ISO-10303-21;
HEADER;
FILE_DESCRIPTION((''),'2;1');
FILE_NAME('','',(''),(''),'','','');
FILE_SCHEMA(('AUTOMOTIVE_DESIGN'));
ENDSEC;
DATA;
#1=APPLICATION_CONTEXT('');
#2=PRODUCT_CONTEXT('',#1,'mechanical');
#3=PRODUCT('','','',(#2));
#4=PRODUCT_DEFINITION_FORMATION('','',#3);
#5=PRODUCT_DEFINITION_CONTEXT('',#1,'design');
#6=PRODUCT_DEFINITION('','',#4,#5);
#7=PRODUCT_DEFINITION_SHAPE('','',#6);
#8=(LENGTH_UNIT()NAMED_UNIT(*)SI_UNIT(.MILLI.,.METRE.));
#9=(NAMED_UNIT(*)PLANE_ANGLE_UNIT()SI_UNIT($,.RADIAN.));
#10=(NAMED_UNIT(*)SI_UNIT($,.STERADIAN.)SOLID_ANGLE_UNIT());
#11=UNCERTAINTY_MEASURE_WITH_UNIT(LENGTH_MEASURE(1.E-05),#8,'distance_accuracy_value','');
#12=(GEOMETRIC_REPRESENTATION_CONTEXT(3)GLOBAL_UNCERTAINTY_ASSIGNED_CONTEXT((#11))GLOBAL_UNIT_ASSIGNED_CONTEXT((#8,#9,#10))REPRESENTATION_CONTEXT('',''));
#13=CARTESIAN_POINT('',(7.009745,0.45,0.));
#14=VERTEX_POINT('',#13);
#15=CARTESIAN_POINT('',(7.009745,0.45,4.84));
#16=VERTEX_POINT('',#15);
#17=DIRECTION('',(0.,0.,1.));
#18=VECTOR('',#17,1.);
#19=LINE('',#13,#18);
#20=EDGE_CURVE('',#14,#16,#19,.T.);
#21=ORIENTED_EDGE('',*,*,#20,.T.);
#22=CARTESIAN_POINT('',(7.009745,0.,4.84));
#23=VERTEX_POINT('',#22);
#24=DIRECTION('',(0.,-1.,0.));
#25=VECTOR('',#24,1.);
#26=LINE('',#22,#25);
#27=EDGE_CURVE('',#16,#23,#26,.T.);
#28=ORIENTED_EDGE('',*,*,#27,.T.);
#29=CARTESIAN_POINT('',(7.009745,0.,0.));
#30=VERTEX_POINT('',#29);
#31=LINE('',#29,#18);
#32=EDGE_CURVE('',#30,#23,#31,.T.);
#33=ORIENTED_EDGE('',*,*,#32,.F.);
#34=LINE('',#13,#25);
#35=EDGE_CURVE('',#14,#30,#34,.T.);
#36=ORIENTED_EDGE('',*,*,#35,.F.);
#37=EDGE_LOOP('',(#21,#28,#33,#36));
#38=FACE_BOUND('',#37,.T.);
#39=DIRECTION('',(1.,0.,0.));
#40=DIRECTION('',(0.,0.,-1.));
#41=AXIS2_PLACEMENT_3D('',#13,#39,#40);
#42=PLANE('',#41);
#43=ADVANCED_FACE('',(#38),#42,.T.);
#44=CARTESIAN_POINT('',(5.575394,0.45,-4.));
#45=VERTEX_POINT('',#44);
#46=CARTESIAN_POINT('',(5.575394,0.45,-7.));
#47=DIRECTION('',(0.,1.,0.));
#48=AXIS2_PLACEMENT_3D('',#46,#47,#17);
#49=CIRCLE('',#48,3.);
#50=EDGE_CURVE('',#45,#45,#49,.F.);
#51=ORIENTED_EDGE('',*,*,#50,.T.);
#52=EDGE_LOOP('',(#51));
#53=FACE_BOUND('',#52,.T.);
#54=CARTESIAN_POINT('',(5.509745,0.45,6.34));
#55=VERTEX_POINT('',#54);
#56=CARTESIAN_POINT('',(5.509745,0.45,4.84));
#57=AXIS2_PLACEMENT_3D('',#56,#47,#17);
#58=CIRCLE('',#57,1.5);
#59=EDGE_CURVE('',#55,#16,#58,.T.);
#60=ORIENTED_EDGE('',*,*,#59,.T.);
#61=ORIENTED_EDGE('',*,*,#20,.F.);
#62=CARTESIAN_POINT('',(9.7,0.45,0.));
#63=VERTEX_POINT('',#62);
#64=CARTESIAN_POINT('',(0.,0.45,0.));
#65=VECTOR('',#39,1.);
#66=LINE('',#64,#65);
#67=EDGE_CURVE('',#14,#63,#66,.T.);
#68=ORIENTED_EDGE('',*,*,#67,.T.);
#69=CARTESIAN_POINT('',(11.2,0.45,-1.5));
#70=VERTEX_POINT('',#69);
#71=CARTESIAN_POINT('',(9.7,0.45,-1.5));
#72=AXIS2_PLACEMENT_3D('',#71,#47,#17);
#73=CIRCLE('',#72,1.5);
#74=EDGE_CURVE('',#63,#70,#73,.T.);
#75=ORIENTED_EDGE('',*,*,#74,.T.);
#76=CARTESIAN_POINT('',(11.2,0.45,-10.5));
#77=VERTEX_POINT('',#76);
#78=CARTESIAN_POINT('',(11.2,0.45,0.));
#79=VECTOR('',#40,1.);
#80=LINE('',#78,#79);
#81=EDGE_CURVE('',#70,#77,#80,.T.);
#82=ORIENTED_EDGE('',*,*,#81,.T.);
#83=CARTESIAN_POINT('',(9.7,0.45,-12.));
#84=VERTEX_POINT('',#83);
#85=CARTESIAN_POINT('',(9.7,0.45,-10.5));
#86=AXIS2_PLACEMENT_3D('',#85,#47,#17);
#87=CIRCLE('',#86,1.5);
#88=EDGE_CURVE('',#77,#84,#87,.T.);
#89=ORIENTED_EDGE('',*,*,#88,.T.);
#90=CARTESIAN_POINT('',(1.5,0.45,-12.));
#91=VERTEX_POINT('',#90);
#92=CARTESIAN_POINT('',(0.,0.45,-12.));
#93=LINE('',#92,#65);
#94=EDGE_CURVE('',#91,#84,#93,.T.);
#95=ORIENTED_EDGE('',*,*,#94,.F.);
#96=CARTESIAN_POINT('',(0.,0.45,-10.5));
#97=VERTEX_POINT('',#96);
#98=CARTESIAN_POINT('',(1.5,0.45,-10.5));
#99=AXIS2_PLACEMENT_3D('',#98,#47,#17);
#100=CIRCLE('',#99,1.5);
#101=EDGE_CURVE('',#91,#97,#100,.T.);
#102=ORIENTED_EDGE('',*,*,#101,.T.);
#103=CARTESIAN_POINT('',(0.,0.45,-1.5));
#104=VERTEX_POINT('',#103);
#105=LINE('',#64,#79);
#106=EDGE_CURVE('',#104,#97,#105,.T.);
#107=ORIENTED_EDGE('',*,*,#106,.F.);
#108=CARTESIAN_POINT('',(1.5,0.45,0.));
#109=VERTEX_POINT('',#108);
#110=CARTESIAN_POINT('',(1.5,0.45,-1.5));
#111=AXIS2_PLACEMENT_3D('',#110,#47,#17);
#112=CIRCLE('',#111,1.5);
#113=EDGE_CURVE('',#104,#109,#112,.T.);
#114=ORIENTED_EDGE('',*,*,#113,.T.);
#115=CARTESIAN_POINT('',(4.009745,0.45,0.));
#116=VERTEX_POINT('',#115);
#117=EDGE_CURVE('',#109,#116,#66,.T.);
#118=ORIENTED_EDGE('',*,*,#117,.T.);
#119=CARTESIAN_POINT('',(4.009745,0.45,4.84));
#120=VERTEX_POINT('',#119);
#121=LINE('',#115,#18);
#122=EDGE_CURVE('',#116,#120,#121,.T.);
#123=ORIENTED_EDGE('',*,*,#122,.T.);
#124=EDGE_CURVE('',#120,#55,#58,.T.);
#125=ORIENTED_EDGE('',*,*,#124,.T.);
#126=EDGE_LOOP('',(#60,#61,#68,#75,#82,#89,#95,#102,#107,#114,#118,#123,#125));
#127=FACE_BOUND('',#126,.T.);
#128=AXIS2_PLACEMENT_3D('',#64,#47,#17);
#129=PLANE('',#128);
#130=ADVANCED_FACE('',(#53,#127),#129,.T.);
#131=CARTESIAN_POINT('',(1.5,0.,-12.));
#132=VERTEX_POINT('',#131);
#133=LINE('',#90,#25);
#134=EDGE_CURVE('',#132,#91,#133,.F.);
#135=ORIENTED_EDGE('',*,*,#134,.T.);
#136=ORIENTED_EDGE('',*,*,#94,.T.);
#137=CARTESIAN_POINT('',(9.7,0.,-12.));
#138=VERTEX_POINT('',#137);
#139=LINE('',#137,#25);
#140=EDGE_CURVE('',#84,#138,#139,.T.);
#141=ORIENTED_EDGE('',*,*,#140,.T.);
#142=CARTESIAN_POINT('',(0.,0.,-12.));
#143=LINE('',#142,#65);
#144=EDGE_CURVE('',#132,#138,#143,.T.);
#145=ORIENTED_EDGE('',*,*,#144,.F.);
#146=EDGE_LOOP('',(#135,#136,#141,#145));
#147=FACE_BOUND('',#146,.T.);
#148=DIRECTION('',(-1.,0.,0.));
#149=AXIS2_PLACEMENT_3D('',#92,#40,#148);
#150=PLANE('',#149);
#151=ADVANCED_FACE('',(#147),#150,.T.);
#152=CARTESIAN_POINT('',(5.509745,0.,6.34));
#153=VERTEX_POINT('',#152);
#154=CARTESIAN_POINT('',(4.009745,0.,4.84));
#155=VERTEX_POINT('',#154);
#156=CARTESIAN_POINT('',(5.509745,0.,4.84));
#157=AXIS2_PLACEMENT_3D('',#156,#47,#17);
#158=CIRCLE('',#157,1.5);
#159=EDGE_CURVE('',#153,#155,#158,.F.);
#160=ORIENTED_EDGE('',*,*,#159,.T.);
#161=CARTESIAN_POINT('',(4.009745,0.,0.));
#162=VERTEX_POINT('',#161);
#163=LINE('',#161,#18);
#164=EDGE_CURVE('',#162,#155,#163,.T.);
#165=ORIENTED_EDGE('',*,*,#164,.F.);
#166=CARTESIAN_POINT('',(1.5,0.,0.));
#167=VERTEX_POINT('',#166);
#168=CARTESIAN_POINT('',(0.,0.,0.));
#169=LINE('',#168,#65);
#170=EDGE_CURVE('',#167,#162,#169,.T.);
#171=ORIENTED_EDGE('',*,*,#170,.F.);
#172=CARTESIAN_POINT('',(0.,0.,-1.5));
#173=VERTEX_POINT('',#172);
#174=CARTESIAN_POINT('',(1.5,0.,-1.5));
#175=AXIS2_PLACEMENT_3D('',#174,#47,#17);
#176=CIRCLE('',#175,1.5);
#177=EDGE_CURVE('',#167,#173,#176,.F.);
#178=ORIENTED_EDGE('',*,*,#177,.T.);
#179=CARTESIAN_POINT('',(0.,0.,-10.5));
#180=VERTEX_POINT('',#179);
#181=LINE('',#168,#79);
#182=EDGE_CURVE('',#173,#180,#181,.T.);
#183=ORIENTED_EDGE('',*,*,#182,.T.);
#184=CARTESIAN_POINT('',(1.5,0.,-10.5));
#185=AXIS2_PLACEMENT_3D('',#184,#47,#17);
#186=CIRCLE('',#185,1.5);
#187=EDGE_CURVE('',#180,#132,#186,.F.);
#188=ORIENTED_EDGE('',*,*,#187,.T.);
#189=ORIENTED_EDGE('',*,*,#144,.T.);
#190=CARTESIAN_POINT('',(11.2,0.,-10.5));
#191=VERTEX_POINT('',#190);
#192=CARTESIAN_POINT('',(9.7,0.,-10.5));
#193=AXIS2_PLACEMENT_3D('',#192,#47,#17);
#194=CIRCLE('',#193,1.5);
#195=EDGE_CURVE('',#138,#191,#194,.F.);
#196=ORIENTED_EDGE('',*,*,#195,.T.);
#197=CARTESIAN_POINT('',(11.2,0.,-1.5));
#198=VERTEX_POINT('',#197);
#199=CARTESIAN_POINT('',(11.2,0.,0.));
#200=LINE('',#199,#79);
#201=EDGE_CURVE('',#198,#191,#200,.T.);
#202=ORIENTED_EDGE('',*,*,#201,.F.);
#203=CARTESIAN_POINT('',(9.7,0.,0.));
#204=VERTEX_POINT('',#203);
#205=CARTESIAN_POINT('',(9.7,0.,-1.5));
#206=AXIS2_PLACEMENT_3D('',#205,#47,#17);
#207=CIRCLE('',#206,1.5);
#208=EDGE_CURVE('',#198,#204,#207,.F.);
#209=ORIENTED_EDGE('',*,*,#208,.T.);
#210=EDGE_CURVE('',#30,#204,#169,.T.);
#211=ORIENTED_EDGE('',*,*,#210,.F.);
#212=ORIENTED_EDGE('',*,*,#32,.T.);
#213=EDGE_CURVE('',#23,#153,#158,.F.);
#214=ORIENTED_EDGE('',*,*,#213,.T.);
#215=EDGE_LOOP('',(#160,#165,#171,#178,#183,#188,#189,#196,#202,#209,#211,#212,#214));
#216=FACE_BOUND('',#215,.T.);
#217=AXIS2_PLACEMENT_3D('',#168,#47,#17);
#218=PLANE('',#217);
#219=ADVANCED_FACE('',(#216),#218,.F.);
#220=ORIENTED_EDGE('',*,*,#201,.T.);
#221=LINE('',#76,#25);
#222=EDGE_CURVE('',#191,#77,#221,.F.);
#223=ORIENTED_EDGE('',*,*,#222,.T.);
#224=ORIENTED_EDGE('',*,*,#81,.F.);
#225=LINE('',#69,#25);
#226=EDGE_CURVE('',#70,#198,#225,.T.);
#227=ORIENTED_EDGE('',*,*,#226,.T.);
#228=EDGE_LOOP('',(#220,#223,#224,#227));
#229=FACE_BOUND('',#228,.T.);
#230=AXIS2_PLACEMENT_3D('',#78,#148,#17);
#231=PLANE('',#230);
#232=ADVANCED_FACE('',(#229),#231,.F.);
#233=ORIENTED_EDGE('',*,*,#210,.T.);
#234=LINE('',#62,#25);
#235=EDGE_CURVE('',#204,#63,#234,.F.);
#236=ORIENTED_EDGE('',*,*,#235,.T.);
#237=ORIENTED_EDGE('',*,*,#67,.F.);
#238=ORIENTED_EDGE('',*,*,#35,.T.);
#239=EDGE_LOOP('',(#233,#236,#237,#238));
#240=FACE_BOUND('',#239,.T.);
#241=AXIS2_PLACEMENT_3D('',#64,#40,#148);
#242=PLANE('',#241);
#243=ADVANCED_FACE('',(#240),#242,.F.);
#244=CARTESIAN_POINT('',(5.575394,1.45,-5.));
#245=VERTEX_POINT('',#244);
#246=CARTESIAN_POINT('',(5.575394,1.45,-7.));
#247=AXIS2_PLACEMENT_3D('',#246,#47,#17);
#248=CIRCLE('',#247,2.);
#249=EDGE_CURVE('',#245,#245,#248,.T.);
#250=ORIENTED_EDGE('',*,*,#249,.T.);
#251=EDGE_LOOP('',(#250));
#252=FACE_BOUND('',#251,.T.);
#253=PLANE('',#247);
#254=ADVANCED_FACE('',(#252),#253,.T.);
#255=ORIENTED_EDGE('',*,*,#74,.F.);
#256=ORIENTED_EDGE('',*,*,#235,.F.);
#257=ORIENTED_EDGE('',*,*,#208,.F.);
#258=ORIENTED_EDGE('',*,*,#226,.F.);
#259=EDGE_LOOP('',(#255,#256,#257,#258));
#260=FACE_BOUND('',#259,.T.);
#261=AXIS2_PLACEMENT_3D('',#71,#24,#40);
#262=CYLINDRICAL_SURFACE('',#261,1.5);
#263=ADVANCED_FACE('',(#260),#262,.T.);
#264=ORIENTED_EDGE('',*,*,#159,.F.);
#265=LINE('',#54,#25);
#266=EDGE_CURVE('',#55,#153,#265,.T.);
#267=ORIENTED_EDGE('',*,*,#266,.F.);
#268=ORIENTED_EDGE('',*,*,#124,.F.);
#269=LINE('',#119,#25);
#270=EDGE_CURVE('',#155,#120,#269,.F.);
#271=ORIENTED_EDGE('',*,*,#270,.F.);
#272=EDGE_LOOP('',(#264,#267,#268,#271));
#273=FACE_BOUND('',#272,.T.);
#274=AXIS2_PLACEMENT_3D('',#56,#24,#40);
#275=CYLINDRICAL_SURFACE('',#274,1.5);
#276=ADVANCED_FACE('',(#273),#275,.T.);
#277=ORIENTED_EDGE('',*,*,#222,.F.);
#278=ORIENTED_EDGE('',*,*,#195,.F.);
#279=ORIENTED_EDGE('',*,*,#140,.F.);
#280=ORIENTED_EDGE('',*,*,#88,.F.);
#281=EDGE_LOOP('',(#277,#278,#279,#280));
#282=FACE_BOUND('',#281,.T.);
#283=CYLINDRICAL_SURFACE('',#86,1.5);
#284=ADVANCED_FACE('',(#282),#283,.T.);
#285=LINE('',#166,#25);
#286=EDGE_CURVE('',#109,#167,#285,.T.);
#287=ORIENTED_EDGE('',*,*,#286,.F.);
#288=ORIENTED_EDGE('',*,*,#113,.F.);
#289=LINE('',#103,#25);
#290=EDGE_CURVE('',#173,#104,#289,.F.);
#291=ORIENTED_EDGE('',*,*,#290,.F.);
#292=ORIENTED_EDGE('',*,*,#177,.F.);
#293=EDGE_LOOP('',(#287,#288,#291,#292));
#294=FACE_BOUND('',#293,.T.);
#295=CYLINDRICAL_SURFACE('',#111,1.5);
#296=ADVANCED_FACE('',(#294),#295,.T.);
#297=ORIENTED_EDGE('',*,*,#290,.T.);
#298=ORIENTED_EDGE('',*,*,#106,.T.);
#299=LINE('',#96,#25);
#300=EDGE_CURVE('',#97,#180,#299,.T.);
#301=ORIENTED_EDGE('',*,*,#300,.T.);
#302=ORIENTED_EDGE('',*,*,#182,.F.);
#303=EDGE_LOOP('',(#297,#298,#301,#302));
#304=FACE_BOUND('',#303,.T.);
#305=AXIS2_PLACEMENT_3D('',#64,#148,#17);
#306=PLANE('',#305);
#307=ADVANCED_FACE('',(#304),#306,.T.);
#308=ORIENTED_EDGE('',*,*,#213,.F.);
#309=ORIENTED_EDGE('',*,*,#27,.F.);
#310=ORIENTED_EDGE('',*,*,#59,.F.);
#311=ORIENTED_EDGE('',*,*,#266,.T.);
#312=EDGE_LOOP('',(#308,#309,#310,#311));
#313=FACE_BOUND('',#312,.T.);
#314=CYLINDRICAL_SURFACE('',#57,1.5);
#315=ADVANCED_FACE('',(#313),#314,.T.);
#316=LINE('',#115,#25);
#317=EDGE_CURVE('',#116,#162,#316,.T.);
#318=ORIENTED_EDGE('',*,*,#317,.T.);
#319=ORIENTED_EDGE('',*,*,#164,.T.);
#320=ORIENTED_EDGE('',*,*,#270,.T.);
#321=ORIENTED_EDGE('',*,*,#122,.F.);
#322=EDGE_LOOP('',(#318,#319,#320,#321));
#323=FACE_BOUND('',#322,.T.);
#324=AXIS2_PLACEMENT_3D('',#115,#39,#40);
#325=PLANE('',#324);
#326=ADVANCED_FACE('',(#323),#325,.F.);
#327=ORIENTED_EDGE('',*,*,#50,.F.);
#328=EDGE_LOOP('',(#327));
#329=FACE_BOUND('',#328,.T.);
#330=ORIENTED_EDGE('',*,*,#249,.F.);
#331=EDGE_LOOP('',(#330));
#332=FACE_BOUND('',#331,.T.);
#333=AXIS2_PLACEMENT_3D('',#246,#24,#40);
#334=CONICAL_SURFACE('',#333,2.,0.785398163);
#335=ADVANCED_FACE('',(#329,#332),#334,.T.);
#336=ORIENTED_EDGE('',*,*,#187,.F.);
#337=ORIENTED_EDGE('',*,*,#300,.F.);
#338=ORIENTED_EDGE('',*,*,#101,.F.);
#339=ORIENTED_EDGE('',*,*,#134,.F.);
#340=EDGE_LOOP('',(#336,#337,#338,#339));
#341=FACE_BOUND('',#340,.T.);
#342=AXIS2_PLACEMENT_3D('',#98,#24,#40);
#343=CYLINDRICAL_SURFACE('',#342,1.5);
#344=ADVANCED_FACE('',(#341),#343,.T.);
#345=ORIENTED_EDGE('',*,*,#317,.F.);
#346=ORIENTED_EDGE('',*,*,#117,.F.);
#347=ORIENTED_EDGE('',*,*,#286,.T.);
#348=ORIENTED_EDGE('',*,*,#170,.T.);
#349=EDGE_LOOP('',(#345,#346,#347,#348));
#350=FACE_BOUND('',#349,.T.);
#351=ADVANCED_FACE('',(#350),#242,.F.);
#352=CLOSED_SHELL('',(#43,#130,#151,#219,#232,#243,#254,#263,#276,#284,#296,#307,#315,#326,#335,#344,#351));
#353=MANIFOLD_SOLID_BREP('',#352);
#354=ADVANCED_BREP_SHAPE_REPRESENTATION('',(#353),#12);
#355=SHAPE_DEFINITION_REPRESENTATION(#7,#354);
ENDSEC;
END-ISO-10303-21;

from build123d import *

# Parameters (mm, degrees)
SKETCH1_W           = 11.2
SKETCH1_H           = 12
SKETCH1_W_2         = 3
SKETCH1_H_2         = 6.34
BOSS_EXTRUDE1_DEPTH = 0.45
FILLET1_R           = 1.5
SKETCH2_R           = 2
BOSS_EXTRUDE2_DEPTH = 1
CHAMFER1_SIZE       = 1


with BuildPart() as part:
    # Sketch1 → Boss-Extrude1 (new body)
    with BuildSketch(Plane(origin=(0, 0, 0), x_dir=(1, 0, 0), z_dir=(0, 1, 0))):
        with Locations((5.6, 6)):
            Rectangle(SKETCH1_W, SKETCH1_H)
        with Locations((5.509745164, -3.17)):
            Rectangle(SKETCH1_W_2, SKETCH1_H_2)
    extrude(amount=BOSS_EXTRUDE1_DEPTH)

    # Fillet1
    fillet1_edges = [part.edges().sort_by_distance(p)[0] for p in [
        (0, 0.225, 0),
        (0, 0.225, -12),
        (11.2, 0.225, -12),
        (11.2, 0.225, 0),
        (7.009745164, 0.225, 6.34),
        (4.009745164, 0.225, 6.34),
    ]]
    fillet(fillet1_edges, radius=FILLET1_R - 0.0001)  # a hair under: the kernel refuses the full size

    # Sketch2 → Boss-Extrude2 (add)
    with BuildSketch(Plane(origin=(0, 0.45, 0), x_dir=(1, 0, 0), z_dir=(0, 1, 0))):
        with Locations(Location((5.575393992, 7, 0), (0, 0, 270))):
            Circle(SKETCH2_R)
    extrude(amount=BOSS_EXTRUDE2_DEPTH)

    # Chamfer1
    chamfer1_edges = [part.edges().sort_by_distance(p)[0] for p in [
        (5.575393992, 0.45, -9),
    ]]
    chamfer(chamfer1_edges, length=CHAMFER1_SIZE - 0.0001)  # a hair under: the kernel refuses the full size


solid = part.part
